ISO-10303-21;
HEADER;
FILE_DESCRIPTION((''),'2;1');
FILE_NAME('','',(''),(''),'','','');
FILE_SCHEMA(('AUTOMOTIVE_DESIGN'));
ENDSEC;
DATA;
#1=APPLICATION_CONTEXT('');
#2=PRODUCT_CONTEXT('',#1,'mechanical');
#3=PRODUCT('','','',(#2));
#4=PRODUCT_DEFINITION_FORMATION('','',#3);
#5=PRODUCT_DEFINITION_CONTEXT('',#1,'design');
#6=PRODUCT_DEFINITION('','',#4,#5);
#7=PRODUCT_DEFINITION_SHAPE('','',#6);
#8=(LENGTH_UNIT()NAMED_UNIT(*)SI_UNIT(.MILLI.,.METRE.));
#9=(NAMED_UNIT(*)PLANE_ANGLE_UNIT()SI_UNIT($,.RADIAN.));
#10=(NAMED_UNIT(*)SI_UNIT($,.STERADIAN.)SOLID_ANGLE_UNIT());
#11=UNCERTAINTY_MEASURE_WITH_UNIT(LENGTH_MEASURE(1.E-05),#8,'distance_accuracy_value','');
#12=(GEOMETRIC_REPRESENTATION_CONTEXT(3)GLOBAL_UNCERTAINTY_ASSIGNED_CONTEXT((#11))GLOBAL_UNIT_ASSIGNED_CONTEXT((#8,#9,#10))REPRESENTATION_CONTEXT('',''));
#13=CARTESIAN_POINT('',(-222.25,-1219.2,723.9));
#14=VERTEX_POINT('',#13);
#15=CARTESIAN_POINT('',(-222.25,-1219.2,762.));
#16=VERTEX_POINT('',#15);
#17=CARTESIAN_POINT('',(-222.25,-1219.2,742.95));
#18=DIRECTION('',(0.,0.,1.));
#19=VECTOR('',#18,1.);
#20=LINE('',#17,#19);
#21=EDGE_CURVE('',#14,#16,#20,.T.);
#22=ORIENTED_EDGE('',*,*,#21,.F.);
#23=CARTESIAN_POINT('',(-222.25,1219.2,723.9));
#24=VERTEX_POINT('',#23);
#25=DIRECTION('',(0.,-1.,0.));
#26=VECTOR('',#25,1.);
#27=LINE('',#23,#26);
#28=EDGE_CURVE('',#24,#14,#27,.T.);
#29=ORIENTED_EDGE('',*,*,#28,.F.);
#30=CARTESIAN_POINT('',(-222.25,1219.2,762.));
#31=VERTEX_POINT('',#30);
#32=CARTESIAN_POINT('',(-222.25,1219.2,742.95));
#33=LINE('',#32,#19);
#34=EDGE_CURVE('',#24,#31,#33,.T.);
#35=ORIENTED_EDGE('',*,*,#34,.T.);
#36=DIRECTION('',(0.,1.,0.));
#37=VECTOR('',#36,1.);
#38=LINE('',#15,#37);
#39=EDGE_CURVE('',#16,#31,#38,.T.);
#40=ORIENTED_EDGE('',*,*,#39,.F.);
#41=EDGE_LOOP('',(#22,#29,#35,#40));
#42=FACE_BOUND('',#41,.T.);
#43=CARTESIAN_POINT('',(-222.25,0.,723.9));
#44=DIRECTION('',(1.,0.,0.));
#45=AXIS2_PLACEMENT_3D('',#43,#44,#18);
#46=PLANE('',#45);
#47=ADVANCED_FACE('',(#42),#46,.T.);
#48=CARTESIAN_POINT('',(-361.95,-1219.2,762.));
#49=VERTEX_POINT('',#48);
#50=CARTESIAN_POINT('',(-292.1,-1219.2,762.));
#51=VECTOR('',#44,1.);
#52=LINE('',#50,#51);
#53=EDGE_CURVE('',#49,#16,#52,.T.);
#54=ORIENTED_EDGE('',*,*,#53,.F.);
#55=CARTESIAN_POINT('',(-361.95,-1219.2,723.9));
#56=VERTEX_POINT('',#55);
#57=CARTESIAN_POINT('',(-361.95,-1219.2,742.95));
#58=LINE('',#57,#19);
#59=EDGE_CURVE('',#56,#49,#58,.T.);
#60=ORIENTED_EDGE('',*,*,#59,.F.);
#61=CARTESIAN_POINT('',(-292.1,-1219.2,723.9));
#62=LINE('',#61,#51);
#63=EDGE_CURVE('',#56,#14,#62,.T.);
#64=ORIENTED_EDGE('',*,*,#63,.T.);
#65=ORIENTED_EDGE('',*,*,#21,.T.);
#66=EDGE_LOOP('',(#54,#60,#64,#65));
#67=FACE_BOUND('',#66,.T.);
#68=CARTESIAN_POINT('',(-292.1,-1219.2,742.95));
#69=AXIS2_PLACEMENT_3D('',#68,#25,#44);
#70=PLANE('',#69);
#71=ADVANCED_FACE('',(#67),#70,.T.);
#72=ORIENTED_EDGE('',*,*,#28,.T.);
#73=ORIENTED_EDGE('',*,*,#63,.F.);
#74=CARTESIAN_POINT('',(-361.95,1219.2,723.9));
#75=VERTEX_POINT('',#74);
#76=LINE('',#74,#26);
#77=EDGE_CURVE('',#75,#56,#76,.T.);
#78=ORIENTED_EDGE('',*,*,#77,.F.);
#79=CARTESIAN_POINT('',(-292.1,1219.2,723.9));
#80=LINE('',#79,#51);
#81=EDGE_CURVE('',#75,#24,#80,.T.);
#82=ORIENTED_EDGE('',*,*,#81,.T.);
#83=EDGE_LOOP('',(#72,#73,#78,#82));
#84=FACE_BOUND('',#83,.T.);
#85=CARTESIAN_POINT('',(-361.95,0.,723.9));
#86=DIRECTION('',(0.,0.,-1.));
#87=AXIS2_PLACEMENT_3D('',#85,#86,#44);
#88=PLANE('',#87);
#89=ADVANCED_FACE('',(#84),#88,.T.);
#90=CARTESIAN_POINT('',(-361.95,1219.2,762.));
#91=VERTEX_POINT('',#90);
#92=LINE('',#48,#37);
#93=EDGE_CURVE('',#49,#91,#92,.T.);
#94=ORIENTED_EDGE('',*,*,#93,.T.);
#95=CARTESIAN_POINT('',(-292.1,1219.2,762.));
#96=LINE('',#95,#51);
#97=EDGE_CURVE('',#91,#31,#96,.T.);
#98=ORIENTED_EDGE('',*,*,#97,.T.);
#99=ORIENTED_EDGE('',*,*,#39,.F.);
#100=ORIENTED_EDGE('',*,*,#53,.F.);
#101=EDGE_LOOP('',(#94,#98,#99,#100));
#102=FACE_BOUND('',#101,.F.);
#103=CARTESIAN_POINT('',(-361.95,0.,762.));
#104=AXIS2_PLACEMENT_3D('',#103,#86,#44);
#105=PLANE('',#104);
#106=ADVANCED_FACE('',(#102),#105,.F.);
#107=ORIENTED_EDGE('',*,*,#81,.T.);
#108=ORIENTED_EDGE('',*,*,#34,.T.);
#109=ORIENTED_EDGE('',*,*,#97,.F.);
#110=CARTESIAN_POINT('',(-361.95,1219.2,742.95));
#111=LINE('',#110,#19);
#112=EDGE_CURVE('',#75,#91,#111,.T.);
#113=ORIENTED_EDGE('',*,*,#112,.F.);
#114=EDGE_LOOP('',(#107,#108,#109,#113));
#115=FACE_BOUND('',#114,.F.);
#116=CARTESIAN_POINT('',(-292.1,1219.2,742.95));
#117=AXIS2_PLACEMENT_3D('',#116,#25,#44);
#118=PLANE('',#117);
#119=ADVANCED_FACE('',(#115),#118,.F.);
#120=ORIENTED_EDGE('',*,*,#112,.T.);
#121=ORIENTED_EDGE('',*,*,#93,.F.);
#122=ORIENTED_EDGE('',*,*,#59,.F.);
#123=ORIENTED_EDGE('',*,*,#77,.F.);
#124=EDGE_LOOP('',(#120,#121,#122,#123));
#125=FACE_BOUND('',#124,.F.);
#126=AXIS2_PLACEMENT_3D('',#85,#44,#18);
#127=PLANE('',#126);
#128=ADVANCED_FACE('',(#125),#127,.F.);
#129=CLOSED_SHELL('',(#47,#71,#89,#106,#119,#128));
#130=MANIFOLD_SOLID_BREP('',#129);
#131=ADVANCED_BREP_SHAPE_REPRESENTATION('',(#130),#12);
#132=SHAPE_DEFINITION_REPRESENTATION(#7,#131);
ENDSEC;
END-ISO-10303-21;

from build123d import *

# Parameters (mm, degrees)
F0_W     = 139.7
F0_H     = 38.1
F2_DEPTH = 1219.2


# Not quite as in the source:
# - a variable given as a bare number and used for a length is read in inches; the dataset says mm whatever the document's units were


with BuildPart() as f2:
    # F0 (on Front) → F2 (new body, symmetric)
    with BuildSketch(Plane.XZ):
        with Locations((-292.1, 742.95)):
            Rectangle(F0_W, F0_H)
    extrude(amount=F2_DEPTH, both=True)


solid = f2.part
